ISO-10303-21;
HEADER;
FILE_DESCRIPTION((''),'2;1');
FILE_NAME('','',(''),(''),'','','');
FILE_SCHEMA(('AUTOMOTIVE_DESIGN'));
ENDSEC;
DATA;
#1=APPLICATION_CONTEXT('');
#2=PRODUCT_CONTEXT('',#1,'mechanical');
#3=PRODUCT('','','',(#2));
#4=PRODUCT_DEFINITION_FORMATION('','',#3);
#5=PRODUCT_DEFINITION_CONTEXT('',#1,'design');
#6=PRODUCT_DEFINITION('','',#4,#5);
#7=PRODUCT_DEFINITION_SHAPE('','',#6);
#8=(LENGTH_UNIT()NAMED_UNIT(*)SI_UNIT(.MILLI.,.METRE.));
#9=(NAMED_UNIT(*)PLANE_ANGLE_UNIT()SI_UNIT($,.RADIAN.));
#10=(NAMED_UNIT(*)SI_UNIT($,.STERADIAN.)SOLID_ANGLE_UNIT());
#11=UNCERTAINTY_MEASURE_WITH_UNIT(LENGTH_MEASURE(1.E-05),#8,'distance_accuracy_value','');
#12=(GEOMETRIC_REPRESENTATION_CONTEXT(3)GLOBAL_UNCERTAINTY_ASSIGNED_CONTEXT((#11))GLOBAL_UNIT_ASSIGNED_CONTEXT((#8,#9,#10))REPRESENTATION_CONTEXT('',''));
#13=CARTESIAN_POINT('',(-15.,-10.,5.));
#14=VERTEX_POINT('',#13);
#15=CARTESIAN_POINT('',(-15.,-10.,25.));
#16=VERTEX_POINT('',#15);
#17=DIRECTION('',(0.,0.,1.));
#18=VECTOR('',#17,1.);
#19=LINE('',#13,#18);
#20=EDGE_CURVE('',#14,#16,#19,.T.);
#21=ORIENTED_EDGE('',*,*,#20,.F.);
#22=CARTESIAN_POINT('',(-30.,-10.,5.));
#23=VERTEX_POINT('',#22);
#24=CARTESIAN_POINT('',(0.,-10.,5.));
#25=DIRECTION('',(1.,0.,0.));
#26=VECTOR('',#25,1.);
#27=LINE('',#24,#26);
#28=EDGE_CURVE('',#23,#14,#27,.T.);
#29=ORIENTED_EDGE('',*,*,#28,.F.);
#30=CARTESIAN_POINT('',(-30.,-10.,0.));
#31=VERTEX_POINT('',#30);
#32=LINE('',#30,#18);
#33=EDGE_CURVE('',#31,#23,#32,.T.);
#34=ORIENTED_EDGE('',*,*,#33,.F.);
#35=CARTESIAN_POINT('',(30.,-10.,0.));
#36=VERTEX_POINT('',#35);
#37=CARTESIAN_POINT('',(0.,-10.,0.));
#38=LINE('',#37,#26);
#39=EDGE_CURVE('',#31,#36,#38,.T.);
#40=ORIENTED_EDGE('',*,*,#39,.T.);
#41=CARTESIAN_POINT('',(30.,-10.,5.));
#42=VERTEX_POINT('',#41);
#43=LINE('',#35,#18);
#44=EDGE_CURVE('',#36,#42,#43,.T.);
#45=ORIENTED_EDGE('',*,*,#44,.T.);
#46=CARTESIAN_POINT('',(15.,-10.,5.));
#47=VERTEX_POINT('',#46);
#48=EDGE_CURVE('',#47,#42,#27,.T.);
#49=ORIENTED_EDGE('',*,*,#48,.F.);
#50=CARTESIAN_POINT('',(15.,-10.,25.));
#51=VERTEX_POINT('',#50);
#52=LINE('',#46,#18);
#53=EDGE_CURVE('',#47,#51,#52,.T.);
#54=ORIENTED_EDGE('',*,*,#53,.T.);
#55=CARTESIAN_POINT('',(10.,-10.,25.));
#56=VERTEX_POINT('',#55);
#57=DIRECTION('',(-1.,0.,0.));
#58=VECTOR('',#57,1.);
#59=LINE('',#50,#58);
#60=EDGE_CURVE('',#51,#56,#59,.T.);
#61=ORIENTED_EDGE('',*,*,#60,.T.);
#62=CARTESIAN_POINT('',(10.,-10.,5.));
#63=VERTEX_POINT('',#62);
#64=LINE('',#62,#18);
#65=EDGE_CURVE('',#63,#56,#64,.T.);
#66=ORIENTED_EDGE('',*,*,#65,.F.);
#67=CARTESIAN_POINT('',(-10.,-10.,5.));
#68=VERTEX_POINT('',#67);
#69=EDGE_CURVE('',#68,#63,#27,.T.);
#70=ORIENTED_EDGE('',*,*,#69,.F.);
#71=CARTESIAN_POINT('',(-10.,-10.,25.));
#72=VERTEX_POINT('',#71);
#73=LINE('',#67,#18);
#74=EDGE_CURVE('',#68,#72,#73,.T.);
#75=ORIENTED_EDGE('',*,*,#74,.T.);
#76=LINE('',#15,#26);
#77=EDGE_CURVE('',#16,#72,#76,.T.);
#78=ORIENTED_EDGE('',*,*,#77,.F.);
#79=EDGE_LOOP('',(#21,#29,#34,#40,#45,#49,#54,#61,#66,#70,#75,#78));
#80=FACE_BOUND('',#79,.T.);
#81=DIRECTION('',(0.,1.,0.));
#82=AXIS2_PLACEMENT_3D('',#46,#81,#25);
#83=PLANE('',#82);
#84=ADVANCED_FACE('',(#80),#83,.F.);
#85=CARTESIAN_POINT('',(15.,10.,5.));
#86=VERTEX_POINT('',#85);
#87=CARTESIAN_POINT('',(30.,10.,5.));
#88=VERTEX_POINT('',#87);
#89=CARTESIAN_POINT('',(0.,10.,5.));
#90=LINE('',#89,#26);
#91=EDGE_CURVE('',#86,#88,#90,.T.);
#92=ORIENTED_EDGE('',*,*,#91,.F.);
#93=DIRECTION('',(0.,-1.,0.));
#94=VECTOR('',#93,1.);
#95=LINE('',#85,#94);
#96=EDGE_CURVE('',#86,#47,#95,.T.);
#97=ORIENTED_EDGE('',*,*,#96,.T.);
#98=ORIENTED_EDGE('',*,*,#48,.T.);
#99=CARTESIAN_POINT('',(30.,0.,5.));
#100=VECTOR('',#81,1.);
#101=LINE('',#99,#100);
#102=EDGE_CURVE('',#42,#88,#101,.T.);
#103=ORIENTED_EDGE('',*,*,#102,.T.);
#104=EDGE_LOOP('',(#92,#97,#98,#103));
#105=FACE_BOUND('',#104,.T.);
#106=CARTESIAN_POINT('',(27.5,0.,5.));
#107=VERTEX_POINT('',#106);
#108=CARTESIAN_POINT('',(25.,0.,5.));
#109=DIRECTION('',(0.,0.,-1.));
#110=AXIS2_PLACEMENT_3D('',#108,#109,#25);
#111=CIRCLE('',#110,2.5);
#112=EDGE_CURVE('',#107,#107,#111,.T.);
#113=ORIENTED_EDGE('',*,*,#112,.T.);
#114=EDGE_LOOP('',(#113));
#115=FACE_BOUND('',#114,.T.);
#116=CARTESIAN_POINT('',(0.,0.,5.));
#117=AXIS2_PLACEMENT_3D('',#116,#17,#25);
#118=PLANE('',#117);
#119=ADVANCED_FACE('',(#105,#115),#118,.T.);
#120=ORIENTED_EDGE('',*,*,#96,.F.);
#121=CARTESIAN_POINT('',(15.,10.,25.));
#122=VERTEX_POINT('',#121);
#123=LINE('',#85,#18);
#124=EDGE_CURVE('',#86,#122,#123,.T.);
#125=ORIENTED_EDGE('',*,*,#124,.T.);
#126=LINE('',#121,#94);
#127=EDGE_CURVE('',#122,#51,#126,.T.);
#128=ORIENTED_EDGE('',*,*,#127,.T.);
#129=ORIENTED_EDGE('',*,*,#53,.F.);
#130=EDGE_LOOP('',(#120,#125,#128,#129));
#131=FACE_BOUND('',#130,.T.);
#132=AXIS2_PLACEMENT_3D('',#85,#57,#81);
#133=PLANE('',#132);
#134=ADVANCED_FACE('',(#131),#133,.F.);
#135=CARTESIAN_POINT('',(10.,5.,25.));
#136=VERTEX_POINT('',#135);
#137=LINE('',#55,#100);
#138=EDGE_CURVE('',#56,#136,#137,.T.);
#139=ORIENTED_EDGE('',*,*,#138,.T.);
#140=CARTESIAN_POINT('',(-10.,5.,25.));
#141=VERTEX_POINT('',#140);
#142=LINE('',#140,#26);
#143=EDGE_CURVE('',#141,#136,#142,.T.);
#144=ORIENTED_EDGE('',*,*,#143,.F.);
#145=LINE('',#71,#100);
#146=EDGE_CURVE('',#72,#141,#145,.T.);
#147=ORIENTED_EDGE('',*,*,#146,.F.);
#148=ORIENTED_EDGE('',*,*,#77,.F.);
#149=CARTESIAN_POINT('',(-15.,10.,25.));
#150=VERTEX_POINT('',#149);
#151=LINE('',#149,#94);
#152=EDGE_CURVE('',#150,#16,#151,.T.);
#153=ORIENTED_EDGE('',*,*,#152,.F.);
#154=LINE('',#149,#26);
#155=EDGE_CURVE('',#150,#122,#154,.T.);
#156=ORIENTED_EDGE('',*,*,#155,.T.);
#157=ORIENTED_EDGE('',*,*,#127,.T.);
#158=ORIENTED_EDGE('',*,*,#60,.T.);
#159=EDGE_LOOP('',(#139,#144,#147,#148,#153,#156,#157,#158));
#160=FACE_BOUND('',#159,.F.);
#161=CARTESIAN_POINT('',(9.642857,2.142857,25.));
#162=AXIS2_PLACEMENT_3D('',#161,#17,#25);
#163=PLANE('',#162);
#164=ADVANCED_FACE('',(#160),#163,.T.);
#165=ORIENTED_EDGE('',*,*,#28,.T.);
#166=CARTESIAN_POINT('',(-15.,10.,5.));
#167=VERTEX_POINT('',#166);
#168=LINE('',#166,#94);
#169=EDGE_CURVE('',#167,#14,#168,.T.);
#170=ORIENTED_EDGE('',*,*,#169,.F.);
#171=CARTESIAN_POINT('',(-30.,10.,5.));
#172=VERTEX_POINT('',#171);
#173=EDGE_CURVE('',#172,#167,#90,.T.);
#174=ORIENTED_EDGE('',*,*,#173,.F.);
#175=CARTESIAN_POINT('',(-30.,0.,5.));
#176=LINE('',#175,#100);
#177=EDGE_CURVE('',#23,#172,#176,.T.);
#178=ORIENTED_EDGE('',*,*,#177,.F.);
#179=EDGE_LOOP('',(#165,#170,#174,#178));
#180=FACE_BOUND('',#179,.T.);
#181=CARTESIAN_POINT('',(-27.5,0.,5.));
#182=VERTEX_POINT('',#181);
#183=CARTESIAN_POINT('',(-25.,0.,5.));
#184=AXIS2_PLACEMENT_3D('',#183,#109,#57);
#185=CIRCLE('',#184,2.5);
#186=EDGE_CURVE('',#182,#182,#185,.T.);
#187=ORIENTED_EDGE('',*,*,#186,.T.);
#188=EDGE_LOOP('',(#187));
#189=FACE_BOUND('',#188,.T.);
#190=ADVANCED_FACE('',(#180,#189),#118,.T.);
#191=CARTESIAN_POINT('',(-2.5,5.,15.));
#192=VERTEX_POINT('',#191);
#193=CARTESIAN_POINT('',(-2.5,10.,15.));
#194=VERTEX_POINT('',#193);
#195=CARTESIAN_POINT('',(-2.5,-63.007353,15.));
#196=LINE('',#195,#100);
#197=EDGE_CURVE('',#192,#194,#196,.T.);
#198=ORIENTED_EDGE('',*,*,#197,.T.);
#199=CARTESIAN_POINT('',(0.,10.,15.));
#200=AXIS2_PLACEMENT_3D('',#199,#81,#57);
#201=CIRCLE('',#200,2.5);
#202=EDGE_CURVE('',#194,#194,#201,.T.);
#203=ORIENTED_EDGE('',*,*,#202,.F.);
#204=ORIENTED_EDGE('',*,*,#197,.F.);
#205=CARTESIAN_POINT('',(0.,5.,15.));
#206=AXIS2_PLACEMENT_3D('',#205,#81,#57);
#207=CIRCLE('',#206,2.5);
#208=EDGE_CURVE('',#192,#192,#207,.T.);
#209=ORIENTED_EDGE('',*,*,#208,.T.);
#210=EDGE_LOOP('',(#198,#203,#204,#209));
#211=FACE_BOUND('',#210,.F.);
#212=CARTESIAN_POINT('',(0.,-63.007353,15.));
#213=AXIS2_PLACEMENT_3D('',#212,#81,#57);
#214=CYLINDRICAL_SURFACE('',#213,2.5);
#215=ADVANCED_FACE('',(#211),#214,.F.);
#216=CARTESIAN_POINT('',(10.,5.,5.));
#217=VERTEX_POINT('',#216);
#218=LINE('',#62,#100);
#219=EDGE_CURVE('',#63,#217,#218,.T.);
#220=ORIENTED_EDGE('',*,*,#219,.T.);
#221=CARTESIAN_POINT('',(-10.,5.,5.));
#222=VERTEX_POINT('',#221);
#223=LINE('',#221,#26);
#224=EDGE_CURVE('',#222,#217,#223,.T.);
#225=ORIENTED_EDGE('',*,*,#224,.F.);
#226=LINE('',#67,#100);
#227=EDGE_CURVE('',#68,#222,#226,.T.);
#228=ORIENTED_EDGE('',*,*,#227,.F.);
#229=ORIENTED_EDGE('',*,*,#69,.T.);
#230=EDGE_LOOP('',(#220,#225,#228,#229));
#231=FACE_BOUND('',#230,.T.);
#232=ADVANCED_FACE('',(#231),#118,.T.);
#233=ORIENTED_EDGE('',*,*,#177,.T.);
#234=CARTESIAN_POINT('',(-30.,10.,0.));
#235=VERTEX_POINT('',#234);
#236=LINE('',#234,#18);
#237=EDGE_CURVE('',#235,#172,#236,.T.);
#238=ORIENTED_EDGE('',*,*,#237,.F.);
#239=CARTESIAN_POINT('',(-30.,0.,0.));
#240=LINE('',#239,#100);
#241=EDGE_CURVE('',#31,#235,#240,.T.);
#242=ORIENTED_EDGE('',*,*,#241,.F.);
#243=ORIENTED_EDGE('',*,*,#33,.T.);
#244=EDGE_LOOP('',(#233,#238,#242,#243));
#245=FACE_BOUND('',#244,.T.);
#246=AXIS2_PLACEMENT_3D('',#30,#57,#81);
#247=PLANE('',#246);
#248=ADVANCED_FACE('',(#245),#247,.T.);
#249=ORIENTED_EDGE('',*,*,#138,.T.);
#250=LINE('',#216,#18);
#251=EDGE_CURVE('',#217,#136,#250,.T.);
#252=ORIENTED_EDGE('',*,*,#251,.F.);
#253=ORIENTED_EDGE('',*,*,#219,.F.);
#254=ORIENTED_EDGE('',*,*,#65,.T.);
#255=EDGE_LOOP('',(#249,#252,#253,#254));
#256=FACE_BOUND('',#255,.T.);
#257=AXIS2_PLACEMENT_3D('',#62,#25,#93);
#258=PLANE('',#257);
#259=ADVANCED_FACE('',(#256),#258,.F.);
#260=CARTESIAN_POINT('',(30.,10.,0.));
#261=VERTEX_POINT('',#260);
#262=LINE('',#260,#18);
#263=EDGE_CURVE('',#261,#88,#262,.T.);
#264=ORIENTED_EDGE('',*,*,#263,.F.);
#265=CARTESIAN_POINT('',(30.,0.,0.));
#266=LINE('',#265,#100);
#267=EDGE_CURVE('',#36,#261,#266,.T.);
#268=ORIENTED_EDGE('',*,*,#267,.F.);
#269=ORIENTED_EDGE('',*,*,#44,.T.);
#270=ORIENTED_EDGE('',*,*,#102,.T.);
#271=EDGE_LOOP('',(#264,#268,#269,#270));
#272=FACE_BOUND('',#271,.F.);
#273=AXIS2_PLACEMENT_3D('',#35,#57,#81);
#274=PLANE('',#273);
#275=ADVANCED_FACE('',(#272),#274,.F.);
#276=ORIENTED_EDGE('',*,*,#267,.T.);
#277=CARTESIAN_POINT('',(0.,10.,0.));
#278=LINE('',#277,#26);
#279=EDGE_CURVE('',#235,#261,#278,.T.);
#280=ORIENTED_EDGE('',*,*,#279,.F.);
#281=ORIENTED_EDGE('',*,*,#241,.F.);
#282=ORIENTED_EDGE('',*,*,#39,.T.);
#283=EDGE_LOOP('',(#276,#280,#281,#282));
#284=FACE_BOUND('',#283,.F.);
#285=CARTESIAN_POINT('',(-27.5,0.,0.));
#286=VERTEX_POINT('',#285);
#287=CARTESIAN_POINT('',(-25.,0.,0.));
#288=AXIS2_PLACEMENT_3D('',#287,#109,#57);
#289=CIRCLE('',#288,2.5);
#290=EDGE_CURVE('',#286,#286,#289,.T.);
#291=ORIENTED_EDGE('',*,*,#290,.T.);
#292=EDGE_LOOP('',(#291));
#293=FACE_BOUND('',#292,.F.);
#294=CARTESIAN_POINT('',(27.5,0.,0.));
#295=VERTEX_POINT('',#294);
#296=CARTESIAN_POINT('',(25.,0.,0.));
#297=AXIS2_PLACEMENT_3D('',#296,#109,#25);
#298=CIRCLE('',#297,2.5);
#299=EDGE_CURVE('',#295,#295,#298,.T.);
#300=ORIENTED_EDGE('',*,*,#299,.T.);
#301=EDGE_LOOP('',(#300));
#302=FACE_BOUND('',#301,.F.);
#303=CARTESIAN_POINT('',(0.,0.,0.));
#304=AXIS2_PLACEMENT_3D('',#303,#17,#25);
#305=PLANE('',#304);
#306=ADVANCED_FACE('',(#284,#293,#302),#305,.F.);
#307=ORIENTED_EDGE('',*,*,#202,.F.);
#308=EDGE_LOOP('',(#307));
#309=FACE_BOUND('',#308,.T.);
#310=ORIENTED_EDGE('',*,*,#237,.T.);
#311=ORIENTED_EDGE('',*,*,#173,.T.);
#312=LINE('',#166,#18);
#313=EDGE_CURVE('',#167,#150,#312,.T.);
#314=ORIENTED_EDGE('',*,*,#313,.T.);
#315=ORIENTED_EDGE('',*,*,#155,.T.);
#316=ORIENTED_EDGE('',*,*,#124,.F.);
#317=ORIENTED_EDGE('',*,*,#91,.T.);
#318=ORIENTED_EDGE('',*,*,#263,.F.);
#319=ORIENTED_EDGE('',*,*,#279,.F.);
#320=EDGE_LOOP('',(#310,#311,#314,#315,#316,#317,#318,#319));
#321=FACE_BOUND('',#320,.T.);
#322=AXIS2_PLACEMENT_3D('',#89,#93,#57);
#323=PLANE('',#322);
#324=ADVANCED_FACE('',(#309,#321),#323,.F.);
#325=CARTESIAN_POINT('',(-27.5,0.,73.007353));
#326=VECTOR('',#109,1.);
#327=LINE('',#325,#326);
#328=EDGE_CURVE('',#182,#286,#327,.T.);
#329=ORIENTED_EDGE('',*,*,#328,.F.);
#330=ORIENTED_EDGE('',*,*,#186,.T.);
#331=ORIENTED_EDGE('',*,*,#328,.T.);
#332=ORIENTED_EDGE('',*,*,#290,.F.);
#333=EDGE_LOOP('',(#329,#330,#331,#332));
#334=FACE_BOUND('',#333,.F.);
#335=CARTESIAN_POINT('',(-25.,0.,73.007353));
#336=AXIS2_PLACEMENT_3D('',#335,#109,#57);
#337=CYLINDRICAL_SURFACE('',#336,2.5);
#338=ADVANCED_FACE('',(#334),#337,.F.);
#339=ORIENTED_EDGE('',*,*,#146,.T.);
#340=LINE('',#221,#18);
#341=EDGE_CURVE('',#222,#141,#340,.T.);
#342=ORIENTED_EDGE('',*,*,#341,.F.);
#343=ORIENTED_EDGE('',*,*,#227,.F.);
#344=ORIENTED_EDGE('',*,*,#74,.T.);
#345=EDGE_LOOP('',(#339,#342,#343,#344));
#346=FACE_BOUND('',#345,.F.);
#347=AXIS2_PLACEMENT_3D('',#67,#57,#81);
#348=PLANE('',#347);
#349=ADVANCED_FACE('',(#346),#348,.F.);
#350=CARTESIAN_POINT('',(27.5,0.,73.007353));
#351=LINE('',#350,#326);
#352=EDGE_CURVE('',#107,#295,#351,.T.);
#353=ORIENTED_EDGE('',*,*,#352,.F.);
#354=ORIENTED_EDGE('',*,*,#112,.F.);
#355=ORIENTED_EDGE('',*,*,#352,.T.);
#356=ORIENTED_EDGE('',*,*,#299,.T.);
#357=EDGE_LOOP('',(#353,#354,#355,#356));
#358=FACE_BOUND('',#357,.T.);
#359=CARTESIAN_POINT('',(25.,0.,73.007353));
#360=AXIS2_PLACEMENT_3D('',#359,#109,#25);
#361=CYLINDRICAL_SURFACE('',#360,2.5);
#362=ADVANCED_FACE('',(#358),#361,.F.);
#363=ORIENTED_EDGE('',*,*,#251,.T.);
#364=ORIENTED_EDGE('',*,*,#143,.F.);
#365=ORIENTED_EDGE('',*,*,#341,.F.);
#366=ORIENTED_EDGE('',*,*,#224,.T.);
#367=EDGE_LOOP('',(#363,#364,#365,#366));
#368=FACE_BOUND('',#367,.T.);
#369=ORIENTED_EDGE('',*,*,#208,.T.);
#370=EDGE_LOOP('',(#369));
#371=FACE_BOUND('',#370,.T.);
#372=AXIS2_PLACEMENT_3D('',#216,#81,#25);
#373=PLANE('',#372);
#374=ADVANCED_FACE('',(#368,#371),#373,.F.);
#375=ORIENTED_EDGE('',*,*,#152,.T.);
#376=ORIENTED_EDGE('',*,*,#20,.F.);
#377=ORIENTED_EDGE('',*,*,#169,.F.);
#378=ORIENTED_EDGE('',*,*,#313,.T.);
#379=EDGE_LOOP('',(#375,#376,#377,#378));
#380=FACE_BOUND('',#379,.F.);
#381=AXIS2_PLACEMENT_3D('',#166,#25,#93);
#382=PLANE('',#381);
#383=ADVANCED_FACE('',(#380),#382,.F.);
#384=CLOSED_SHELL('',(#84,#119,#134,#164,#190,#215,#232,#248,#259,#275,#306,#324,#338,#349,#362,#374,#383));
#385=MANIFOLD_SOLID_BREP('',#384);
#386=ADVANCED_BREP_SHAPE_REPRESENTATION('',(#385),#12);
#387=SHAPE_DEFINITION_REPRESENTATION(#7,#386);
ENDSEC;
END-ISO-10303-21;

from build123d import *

# Parameters (mm, degrees)
F0_W     = 60
F0_H     = 20
F1_DEPTH = 5
F3_DEPTH = 20
F5_D     = 5
F7_D     = 5


# Not quite as in the source:
# - a pattern or mirror of a feature is missing from the dataset's text; its kind, count and spacing are read off the source's solid


with BuildPart() as f1:
    # F0 (on Top) → F1 (new body)
    with BuildSketch(Plane.XY):
        Rectangle(F0_W, F0_H)
    extrude(amount=F1_DEPTH)

    # F2 (on face) → F3 (join)
    with BuildSketch(Plane.XY.offset(5)):
        Polygon((-15, 10), (-15, -10), (-10, -10), (-10, 5), (0, 5), (0, 10), align=None)
    f3 = extrude(amount=F3_DEPTH)

    # F3_copies: F3 across plane
    add(f3.mirror(Plane(origin=(0, 0, 0), x_dir=(0, 0, 1), z_dir=(1, 0, 0))))

    # F5 (through all)
    with Locations(Plane.XY.offset(5)):
        with Locations((-25, 0)):
            f5 = Hole(F5_D / 2)

    # F5_copies: F5 across plane
    add(f5.mirror(Plane(origin=(0, 0, 0), x_dir=(0, 0, 1), z_dir=(1, 0, 0))), mode=Mode.SUBTRACT)

    # F7 (through all)
    with Locations(Plane.XZ.offset(-5)):
        with Locations((0, 15)):
            Hole(F7_D / 2)


solid = f1.part
